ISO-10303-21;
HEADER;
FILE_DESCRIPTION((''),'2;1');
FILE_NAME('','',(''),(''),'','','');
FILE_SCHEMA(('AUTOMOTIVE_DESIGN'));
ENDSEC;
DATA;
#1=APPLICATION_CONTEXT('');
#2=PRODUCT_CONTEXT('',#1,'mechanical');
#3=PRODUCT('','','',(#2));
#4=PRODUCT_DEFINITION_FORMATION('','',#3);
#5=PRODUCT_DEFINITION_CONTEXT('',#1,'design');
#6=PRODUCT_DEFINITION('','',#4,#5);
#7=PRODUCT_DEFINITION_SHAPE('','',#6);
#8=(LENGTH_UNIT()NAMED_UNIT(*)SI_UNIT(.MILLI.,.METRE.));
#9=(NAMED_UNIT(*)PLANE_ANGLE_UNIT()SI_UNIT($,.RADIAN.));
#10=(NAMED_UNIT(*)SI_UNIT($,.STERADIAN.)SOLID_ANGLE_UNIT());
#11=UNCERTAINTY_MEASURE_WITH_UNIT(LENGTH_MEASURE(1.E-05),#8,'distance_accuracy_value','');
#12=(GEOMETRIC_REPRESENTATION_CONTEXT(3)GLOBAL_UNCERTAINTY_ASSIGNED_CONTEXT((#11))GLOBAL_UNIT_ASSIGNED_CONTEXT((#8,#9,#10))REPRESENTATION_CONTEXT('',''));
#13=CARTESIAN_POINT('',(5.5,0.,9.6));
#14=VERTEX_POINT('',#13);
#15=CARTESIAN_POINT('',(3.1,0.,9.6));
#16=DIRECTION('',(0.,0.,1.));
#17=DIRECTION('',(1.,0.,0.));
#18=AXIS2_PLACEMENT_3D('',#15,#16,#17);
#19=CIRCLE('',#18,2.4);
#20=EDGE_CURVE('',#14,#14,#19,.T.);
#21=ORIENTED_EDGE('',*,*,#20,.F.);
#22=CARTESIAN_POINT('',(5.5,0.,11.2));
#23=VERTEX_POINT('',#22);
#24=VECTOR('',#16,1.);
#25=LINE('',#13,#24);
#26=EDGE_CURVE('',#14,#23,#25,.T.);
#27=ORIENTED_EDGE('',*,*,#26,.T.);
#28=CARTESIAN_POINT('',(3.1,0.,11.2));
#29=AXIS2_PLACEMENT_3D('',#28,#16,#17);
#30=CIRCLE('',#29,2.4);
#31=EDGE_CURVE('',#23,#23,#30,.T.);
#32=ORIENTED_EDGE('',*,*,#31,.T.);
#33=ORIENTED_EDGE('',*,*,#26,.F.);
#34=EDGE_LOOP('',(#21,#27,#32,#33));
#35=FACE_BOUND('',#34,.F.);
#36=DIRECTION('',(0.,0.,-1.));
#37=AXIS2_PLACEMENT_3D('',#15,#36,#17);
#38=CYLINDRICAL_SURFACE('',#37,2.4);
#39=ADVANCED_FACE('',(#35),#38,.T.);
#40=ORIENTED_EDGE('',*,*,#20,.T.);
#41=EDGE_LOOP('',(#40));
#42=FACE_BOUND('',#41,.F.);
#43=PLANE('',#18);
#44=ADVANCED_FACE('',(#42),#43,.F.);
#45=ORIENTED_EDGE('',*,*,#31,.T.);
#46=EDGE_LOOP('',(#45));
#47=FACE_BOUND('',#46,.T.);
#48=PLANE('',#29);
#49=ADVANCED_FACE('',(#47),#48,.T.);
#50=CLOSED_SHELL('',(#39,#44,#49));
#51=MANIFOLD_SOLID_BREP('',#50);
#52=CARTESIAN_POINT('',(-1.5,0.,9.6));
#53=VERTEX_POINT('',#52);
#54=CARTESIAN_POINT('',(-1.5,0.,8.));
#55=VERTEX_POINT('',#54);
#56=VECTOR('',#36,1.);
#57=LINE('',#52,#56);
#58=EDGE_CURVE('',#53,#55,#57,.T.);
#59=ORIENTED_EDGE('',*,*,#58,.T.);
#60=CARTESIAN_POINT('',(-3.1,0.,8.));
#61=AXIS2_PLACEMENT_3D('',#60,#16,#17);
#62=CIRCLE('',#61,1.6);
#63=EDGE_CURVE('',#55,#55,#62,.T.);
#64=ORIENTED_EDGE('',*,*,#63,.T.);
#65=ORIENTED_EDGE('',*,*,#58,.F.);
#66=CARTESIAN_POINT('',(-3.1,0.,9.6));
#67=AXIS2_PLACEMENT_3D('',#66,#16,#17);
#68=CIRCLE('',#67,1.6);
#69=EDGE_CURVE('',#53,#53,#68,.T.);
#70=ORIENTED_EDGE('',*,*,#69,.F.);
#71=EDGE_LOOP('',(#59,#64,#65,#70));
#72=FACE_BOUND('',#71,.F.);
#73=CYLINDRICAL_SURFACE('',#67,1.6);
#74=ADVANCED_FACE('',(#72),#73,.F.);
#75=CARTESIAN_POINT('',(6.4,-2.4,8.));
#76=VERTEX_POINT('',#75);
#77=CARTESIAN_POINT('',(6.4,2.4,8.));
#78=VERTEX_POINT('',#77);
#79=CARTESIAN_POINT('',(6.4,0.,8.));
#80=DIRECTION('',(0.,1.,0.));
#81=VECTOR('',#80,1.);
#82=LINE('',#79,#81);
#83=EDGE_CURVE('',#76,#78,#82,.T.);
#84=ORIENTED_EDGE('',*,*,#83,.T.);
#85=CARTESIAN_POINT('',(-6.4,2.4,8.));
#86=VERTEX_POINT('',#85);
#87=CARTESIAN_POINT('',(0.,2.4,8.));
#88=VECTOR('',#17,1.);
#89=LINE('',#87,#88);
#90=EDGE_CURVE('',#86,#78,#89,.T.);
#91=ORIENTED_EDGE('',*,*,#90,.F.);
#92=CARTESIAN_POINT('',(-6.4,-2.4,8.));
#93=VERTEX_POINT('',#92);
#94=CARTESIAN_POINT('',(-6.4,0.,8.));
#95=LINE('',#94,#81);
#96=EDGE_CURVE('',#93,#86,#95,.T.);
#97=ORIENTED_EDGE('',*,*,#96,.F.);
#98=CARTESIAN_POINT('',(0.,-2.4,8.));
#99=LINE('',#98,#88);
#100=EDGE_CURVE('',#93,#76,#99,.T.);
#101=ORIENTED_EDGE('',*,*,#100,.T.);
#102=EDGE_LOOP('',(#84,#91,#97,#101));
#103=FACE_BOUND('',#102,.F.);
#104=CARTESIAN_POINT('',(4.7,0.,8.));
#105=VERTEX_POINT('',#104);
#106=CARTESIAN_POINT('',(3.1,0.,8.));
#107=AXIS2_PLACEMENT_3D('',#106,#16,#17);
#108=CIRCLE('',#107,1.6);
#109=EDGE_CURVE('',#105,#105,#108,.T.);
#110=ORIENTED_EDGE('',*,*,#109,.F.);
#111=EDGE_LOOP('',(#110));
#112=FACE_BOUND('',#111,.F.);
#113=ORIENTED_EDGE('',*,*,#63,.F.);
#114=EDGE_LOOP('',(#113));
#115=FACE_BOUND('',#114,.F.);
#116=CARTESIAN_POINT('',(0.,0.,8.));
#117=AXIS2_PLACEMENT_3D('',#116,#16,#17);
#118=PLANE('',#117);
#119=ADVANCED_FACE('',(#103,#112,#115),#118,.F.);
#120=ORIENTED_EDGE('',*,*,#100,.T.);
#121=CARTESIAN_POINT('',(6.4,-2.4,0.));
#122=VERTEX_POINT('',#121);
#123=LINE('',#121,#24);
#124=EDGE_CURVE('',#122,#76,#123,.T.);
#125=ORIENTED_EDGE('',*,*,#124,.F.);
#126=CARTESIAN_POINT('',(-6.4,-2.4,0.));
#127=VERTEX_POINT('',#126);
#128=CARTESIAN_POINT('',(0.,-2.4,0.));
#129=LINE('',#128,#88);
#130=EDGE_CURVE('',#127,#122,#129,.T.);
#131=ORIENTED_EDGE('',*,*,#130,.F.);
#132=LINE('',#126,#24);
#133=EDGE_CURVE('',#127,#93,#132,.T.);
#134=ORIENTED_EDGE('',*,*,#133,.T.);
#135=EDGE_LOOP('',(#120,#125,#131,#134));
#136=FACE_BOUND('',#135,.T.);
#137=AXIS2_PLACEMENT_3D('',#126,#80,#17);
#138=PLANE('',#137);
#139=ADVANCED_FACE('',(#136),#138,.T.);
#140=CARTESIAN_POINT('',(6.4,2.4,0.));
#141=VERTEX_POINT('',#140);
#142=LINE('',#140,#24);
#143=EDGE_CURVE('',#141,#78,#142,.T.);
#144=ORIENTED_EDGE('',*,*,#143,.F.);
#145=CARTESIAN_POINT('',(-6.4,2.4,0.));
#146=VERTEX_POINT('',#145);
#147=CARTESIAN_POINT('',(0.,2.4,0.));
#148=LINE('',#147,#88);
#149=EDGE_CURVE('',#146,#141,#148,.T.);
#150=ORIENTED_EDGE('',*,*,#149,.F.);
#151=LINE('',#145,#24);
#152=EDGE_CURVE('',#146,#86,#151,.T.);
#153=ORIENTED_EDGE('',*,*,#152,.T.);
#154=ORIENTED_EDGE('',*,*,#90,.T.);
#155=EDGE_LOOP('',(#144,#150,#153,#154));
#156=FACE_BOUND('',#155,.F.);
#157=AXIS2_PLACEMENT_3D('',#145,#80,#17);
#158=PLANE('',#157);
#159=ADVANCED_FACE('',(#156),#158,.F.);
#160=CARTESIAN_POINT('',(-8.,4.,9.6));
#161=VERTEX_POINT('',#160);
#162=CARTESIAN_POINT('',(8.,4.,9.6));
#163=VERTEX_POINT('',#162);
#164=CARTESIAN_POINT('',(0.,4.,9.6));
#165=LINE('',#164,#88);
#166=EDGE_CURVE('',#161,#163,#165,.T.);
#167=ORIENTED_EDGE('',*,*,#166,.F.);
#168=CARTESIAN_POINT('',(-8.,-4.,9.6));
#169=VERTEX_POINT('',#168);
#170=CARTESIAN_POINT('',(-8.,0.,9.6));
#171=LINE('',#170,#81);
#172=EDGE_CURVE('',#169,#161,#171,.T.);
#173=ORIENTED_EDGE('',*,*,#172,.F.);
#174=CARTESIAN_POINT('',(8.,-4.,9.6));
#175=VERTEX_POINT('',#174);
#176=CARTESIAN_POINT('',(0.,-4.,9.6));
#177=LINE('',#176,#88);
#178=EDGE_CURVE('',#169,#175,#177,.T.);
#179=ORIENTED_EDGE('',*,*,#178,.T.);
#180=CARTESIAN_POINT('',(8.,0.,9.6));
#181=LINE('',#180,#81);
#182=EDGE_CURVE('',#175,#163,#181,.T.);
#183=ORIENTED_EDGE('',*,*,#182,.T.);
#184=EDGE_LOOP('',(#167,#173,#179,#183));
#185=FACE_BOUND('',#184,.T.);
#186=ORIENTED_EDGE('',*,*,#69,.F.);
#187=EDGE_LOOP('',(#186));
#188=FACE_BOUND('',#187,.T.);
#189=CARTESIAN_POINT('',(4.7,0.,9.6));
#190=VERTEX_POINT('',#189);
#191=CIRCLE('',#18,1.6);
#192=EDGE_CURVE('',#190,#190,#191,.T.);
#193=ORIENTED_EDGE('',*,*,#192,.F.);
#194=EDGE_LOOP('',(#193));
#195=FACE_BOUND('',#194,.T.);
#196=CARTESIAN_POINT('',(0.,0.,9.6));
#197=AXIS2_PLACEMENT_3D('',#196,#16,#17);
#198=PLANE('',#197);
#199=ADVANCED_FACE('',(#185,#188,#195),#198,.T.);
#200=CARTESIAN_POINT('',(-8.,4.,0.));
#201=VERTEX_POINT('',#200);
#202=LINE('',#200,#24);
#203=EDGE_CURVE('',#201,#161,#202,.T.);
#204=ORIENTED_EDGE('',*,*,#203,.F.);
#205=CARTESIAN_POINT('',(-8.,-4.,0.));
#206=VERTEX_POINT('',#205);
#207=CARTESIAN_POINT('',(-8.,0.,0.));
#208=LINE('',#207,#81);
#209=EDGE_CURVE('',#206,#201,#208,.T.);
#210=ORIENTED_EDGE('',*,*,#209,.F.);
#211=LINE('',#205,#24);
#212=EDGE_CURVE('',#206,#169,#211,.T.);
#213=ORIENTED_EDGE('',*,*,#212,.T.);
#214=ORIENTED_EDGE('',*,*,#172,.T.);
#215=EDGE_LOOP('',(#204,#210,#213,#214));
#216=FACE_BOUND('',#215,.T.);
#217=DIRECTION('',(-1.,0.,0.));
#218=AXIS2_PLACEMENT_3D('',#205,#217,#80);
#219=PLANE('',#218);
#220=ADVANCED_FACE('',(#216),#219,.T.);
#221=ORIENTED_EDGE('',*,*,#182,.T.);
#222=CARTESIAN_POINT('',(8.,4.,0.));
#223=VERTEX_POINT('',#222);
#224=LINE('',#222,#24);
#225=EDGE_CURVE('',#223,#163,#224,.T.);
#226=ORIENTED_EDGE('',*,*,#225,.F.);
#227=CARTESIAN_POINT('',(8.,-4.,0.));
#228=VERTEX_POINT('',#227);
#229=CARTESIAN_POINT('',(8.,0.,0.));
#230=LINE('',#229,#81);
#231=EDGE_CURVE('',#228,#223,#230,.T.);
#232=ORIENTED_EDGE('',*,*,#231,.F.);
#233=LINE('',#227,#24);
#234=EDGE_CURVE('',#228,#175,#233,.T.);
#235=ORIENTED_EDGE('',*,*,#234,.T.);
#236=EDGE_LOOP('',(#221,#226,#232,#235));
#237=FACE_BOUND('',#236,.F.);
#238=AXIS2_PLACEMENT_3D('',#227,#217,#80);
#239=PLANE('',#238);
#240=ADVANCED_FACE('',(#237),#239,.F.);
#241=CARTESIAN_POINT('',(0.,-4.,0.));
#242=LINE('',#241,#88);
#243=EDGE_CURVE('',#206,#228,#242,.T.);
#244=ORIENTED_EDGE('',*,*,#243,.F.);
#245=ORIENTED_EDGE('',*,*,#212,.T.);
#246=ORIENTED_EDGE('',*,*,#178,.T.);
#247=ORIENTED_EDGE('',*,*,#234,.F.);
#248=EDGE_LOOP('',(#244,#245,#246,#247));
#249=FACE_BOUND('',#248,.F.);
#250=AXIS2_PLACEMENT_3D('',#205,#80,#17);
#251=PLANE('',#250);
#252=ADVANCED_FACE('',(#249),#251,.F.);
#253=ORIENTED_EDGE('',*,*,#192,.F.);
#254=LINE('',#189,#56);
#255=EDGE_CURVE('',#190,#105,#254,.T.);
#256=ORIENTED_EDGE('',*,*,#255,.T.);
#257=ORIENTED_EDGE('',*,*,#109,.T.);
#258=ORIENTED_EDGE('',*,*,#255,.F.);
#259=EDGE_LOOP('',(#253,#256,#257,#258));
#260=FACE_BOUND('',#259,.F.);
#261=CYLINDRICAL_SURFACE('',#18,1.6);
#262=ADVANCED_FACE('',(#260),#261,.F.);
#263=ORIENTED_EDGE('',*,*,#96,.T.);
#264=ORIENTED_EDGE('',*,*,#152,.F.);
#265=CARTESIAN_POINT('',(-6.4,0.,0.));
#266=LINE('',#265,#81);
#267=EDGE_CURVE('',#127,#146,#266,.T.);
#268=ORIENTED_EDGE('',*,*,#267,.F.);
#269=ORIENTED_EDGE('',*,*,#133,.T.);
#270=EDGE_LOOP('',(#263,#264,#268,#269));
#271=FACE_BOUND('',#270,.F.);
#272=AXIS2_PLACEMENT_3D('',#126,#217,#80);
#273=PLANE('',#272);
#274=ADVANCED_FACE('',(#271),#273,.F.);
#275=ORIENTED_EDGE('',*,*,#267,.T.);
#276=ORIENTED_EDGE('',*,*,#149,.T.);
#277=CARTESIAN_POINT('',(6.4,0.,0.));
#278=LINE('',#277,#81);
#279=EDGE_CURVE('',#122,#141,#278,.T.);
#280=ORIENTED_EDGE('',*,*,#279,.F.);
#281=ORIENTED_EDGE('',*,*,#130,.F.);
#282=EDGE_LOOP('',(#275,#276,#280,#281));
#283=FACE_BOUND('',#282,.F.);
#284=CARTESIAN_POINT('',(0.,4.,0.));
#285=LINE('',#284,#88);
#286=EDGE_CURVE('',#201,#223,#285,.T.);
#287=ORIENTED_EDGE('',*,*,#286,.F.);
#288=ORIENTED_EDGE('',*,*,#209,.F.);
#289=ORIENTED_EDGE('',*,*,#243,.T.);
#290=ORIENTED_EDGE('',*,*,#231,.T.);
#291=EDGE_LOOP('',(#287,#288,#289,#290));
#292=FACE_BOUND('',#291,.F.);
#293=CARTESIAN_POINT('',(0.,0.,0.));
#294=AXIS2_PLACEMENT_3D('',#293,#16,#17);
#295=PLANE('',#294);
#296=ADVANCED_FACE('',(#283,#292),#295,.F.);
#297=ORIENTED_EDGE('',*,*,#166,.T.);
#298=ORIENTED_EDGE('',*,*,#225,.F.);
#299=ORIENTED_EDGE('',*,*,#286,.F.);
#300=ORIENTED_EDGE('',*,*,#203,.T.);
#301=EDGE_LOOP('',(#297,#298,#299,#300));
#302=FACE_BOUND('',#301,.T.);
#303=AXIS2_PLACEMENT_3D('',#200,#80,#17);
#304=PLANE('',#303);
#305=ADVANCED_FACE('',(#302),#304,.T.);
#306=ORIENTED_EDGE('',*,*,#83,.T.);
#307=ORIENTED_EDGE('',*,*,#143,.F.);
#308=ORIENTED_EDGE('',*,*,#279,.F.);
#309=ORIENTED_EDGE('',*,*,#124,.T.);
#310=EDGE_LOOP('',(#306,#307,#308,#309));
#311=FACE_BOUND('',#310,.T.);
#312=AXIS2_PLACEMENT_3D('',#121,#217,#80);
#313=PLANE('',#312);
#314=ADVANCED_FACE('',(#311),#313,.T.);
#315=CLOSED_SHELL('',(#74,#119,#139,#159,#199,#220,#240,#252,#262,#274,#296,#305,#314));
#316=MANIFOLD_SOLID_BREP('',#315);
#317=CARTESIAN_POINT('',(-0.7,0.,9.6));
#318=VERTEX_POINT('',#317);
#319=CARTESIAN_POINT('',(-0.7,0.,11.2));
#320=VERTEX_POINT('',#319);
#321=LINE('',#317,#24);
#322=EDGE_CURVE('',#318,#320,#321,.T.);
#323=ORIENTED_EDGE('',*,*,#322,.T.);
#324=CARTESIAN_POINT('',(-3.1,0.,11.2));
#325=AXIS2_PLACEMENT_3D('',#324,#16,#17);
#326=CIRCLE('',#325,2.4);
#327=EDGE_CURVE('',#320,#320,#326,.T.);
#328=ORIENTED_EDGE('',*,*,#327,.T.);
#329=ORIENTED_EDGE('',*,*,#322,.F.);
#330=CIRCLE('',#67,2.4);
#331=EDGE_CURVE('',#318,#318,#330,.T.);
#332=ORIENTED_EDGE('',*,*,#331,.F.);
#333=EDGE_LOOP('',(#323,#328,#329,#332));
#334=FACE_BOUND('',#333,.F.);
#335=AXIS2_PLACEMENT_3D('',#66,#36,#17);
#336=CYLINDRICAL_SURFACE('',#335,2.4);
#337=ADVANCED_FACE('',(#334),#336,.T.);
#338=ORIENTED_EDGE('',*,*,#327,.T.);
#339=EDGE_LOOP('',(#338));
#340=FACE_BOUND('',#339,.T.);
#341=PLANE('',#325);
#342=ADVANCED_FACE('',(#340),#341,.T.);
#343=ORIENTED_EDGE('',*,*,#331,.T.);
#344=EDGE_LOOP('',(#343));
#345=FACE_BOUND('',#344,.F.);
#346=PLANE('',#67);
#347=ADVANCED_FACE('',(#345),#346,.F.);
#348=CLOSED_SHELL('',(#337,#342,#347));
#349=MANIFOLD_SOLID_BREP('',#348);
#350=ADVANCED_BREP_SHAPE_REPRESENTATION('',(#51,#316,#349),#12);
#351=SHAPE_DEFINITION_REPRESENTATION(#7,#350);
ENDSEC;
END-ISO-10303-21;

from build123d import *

# Parameters (mm, degrees)
F0_W     = 16
F0_H     = 8
F0_W_2   = 12.8
F0_H_2   = 4.8
F1_DEPTH = 9.6
F2_DEPTH = 8
F3_R     = 1.6
F4_DEPTH = 3.2
F5_R     = 2.4
F6_DEPTH = 1.6


# Not quite as in the source:
# - the program builds the solid bodies; features that only make, move or delete a surface that nothing else refers to are left out


with BuildPart() as f1:
    # F0 (on Top) → F1 (new body)
    with BuildSketch(Plane.XY):
        Rectangle(F0_W, F0_H)
        Rectangle(F0_W_2, F0_H_2, mode=Mode.SUBTRACT)
        Rectangle(F0_W_2, F0_H_2)
    extrude(amount=F1_DEPTH)

    # F0 (on Top) → F2 (cut)
    with BuildSketch(Plane.XY):
        Rectangle(F0_W_2, F0_H_2)
    extrude(amount=F2_DEPTH, mode=Mode.SUBTRACT)

    # F3 (on face) → F4 (cut)
    with BuildSketch(Plane.XY.offset(9.6)):
        with Locations((-3.1, 0)):
            Circle(F3_R)
        with Locations((3.1, 0)):
            Circle(F3_R)
    extrude(amount=-F4_DEPTH, mode=Mode.SUBTRACT)


with BuildPart() as f6:
    # F5 (on face) → F6 (new body)
    with BuildSketch(Plane.XY.offset(9.6)):
        with Locations((-3.1, 0)):
            Circle(F5_R)
    extrude(amount=F6_DEPTH)


with BuildPart() as f6b:
    # F5 (on face) → F6, piece 2 (new body)
    with BuildSketch(Plane.XY.offset(9.6)):
        with Locations((3.1, 0)):
            Circle(F5_R)
    extrude(amount=F6_DEPTH)


solid = Compound([f1.part, f6.part, f6b.part])
